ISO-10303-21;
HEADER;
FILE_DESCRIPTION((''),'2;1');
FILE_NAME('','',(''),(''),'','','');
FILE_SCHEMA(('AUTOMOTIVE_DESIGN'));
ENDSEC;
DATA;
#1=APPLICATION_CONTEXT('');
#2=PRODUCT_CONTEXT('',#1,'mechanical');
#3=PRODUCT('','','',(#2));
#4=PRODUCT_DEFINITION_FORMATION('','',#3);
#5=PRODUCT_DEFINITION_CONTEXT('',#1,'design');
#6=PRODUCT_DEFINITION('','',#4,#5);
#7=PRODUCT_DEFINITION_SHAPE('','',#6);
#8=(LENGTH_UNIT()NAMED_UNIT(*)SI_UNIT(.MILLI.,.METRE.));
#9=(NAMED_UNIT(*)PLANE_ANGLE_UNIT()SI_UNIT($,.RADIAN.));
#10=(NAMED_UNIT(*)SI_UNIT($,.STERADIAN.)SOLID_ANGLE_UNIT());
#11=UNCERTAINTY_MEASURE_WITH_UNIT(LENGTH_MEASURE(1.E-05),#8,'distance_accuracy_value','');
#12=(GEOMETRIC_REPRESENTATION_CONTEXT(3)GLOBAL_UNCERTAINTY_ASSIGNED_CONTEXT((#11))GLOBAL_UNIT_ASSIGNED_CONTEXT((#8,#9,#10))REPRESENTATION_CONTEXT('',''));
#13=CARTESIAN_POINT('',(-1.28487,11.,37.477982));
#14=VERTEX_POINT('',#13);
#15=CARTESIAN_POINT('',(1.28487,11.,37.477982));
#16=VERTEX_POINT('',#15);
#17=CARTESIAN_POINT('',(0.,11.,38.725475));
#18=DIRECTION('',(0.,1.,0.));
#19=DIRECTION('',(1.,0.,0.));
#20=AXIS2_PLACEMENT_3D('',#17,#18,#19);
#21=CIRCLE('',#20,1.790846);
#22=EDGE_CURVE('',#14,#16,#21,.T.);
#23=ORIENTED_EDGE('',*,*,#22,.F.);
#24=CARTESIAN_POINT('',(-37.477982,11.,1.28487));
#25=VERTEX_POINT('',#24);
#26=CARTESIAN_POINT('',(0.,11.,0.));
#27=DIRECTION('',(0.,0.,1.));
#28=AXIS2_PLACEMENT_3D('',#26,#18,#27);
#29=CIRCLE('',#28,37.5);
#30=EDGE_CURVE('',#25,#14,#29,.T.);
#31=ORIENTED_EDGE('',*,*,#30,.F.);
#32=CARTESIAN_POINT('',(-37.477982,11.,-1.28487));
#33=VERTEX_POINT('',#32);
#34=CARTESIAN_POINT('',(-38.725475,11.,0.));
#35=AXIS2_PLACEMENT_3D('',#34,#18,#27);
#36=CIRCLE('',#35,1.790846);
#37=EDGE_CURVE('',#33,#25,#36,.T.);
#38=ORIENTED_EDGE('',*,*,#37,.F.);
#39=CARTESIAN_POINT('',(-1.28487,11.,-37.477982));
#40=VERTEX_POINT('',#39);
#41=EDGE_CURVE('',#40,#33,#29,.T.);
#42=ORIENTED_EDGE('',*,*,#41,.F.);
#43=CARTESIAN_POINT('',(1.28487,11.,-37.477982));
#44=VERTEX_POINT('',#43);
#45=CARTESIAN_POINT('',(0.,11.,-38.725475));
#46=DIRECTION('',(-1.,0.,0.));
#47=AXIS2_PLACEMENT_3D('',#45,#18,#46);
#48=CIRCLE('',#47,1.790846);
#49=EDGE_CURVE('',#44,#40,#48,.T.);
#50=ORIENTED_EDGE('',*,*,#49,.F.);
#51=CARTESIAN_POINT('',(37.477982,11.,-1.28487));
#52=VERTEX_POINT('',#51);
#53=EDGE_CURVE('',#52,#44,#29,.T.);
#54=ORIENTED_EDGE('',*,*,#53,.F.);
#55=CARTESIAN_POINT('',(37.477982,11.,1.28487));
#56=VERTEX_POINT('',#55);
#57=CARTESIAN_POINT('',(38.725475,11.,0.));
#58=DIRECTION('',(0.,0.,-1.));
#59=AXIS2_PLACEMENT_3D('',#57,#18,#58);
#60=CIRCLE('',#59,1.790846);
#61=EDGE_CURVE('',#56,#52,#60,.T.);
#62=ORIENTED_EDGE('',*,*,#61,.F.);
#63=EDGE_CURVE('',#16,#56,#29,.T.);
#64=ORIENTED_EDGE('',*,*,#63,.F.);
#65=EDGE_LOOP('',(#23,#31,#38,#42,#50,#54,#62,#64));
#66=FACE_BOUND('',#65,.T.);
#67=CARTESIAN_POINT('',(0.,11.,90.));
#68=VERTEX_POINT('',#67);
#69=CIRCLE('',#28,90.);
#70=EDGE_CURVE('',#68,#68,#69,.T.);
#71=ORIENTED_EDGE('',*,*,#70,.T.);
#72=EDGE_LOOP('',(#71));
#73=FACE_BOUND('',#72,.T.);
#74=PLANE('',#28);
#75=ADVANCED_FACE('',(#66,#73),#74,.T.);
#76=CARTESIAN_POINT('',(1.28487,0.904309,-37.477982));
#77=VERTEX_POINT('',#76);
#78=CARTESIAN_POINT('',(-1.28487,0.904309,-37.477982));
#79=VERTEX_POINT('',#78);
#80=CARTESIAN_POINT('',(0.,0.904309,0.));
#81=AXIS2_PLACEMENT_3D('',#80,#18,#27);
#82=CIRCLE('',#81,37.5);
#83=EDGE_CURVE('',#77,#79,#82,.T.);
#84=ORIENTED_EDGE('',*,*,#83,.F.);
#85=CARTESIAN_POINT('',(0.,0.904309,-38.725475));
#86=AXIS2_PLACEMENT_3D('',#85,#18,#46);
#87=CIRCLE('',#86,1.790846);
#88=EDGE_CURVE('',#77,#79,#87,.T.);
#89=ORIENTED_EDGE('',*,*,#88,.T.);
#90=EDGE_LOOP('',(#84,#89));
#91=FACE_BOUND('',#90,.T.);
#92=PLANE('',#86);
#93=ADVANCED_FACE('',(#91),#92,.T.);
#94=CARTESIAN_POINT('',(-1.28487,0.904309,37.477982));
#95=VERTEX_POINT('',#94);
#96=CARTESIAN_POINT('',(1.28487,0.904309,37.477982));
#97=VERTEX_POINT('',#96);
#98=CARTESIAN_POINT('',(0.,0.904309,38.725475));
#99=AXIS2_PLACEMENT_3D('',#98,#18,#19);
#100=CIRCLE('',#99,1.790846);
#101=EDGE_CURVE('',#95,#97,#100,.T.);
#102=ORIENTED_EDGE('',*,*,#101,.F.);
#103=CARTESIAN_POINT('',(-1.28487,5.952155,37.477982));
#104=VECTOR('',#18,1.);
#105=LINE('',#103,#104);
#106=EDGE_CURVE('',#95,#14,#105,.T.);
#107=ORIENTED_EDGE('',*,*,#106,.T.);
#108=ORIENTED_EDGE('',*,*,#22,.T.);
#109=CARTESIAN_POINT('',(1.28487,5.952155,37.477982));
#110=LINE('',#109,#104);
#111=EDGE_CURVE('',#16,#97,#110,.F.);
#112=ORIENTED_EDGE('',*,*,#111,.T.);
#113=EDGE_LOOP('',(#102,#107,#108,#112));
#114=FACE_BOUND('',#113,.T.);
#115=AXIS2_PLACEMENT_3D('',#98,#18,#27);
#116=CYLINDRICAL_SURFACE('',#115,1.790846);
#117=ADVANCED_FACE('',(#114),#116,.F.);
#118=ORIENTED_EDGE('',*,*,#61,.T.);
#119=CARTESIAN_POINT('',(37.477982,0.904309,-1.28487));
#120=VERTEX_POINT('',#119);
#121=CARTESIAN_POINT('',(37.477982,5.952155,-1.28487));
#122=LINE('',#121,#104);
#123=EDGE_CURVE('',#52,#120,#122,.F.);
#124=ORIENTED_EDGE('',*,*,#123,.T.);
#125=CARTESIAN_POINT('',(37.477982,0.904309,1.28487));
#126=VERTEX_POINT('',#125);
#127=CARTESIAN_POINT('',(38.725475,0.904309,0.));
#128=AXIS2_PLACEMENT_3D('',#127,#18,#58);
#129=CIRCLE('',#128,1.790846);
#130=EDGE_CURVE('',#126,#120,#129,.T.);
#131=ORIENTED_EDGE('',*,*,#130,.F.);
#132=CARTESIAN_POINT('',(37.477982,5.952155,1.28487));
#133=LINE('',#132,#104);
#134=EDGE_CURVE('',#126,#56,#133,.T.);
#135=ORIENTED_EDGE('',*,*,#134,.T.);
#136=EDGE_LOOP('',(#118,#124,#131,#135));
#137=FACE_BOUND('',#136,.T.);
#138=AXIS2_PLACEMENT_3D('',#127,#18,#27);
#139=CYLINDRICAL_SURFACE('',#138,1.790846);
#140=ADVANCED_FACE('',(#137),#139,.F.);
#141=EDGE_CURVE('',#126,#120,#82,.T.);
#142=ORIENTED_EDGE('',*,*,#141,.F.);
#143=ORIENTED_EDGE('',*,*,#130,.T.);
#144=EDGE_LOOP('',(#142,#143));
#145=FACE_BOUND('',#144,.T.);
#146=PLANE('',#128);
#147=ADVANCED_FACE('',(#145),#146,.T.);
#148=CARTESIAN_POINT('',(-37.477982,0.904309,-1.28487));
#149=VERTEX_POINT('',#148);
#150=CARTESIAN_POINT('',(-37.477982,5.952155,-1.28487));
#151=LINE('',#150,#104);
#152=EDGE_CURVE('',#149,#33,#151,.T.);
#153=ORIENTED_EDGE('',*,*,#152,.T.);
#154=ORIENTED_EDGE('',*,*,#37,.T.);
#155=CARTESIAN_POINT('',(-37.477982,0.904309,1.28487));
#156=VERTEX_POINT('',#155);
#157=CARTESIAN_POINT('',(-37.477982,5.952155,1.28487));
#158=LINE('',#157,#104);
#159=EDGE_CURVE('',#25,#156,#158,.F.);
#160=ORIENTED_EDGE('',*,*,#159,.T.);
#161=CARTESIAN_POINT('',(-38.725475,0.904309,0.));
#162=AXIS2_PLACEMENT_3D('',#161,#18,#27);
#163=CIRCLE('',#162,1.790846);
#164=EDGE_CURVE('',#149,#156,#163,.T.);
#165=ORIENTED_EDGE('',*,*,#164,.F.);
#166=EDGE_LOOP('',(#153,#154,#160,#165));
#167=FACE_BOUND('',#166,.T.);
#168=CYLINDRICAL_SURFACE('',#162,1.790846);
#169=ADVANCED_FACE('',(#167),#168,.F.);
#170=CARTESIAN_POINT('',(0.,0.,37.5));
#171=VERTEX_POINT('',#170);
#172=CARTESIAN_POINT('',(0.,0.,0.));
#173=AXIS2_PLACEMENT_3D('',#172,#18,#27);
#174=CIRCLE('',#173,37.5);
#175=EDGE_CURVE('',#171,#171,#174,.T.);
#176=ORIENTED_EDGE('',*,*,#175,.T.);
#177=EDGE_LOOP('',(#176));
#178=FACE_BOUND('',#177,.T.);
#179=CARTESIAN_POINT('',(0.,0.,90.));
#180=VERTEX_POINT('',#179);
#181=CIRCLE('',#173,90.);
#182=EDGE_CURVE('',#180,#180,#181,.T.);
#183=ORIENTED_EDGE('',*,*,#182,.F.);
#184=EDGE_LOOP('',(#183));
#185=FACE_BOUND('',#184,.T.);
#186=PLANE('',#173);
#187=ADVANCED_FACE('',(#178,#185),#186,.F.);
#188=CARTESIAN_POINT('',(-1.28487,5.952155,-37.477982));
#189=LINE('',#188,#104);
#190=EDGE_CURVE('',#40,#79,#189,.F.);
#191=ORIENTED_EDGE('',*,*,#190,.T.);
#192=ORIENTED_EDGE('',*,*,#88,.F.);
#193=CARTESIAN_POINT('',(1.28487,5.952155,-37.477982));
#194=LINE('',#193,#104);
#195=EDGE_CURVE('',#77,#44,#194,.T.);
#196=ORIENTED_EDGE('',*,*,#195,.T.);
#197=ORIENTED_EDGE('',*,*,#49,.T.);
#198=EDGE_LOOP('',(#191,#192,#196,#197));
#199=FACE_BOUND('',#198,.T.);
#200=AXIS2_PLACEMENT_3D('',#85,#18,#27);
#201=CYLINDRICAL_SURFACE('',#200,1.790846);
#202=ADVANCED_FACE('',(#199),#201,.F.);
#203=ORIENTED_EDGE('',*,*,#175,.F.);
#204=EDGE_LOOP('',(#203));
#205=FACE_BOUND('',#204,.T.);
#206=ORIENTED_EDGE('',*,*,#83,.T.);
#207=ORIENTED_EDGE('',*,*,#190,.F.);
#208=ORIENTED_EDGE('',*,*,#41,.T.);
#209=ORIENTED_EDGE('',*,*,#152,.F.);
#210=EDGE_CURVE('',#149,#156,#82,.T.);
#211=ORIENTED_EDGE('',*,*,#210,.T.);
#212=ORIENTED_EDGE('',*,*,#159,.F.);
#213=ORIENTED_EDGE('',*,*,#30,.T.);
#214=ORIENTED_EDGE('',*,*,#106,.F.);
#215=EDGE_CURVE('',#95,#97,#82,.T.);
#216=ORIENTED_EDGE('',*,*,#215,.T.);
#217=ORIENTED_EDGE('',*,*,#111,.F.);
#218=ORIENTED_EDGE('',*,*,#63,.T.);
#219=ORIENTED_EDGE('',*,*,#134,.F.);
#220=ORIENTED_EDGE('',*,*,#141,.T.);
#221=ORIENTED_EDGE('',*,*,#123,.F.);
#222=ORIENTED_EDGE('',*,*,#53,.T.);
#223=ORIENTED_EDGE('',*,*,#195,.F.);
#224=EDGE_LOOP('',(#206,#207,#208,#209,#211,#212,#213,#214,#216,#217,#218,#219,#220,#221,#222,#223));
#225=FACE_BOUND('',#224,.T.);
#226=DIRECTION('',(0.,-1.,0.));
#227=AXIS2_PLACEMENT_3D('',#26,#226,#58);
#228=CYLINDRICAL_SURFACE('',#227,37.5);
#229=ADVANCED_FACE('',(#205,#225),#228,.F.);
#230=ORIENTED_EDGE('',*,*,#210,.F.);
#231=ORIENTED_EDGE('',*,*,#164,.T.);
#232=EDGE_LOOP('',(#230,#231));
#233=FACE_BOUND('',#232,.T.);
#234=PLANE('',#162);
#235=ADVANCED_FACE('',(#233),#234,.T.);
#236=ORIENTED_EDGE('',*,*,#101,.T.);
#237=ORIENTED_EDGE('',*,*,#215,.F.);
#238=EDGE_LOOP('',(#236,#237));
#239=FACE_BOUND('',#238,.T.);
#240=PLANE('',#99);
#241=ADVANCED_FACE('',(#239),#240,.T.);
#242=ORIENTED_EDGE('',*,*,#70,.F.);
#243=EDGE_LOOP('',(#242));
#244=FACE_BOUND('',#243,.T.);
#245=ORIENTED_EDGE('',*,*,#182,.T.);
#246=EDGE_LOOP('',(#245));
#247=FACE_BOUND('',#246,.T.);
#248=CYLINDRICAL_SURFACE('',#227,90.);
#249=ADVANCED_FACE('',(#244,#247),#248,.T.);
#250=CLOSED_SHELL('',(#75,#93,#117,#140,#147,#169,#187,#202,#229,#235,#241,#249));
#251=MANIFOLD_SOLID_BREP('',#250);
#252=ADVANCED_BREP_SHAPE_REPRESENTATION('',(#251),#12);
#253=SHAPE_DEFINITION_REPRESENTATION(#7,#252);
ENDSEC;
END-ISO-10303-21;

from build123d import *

# Parameters (mm, degrees)
SKETCH1_R           = 90
BOSS_EXTRUDE1_DEPTH = 11
SKETCH2_R           = 37.5
CUT_EXTRUDE1_DEPTH  = 128.753669223
SKETCH3_R           = 1.790846421
CUT_EXTRUDE2_DEPTH  = 10.095690862
CIRPATTERN1_COUNT   = 4


with BuildPart() as part:
    # Sketch1 → Boss-Extrude1 (new body)
    with BuildSketch(Plane(origin=(0, 0, 0), x_dir=(1, 0, 0), z_dir=(0, 1, 0))):
        Circle(SKETCH1_R)
    extrude(amount=BOSS_EXTRUDE1_DEPTH)

    # Sketch2 → Cut-Extrude1 (cut, through all)
    with BuildSketch(Plane(origin=(0, 0, 0), x_dir=(1, 0, 0), z_dir=(0, 1, 0))):
        Circle(SKETCH2_R)
    extrude(amount=CUT_EXTRUDE1_DEPTH, mode=Mode.SUBTRACT)

    # Sketch3 → Cut-Extrude2 (cut)
    with BuildSketch(Plane(origin=(0, 11, 0), x_dir=(1, 0, 0), z_dir=(0, 1, 0))):
        with Locations((-38.72547526, 0)):
            Circle(SKETCH3_R)
    cut_extrude2 = extrude(amount=-CUT_EXTRUDE2_DEPTH, mode=Mode.SUBTRACT)

    # CirPattern1: Cut-Extrude2 ×4 about axis
    cirpattern1_axis = Axis((0, 0, 0), (0, 1, 0))
    for i in range(1, CIRPATTERN1_COUNT):
        add(cut_extrude2.rotate(cirpattern1_axis, i * 360 / CIRPATTERN1_COUNT), mode=Mode.SUBTRACT)


solid = part.part
